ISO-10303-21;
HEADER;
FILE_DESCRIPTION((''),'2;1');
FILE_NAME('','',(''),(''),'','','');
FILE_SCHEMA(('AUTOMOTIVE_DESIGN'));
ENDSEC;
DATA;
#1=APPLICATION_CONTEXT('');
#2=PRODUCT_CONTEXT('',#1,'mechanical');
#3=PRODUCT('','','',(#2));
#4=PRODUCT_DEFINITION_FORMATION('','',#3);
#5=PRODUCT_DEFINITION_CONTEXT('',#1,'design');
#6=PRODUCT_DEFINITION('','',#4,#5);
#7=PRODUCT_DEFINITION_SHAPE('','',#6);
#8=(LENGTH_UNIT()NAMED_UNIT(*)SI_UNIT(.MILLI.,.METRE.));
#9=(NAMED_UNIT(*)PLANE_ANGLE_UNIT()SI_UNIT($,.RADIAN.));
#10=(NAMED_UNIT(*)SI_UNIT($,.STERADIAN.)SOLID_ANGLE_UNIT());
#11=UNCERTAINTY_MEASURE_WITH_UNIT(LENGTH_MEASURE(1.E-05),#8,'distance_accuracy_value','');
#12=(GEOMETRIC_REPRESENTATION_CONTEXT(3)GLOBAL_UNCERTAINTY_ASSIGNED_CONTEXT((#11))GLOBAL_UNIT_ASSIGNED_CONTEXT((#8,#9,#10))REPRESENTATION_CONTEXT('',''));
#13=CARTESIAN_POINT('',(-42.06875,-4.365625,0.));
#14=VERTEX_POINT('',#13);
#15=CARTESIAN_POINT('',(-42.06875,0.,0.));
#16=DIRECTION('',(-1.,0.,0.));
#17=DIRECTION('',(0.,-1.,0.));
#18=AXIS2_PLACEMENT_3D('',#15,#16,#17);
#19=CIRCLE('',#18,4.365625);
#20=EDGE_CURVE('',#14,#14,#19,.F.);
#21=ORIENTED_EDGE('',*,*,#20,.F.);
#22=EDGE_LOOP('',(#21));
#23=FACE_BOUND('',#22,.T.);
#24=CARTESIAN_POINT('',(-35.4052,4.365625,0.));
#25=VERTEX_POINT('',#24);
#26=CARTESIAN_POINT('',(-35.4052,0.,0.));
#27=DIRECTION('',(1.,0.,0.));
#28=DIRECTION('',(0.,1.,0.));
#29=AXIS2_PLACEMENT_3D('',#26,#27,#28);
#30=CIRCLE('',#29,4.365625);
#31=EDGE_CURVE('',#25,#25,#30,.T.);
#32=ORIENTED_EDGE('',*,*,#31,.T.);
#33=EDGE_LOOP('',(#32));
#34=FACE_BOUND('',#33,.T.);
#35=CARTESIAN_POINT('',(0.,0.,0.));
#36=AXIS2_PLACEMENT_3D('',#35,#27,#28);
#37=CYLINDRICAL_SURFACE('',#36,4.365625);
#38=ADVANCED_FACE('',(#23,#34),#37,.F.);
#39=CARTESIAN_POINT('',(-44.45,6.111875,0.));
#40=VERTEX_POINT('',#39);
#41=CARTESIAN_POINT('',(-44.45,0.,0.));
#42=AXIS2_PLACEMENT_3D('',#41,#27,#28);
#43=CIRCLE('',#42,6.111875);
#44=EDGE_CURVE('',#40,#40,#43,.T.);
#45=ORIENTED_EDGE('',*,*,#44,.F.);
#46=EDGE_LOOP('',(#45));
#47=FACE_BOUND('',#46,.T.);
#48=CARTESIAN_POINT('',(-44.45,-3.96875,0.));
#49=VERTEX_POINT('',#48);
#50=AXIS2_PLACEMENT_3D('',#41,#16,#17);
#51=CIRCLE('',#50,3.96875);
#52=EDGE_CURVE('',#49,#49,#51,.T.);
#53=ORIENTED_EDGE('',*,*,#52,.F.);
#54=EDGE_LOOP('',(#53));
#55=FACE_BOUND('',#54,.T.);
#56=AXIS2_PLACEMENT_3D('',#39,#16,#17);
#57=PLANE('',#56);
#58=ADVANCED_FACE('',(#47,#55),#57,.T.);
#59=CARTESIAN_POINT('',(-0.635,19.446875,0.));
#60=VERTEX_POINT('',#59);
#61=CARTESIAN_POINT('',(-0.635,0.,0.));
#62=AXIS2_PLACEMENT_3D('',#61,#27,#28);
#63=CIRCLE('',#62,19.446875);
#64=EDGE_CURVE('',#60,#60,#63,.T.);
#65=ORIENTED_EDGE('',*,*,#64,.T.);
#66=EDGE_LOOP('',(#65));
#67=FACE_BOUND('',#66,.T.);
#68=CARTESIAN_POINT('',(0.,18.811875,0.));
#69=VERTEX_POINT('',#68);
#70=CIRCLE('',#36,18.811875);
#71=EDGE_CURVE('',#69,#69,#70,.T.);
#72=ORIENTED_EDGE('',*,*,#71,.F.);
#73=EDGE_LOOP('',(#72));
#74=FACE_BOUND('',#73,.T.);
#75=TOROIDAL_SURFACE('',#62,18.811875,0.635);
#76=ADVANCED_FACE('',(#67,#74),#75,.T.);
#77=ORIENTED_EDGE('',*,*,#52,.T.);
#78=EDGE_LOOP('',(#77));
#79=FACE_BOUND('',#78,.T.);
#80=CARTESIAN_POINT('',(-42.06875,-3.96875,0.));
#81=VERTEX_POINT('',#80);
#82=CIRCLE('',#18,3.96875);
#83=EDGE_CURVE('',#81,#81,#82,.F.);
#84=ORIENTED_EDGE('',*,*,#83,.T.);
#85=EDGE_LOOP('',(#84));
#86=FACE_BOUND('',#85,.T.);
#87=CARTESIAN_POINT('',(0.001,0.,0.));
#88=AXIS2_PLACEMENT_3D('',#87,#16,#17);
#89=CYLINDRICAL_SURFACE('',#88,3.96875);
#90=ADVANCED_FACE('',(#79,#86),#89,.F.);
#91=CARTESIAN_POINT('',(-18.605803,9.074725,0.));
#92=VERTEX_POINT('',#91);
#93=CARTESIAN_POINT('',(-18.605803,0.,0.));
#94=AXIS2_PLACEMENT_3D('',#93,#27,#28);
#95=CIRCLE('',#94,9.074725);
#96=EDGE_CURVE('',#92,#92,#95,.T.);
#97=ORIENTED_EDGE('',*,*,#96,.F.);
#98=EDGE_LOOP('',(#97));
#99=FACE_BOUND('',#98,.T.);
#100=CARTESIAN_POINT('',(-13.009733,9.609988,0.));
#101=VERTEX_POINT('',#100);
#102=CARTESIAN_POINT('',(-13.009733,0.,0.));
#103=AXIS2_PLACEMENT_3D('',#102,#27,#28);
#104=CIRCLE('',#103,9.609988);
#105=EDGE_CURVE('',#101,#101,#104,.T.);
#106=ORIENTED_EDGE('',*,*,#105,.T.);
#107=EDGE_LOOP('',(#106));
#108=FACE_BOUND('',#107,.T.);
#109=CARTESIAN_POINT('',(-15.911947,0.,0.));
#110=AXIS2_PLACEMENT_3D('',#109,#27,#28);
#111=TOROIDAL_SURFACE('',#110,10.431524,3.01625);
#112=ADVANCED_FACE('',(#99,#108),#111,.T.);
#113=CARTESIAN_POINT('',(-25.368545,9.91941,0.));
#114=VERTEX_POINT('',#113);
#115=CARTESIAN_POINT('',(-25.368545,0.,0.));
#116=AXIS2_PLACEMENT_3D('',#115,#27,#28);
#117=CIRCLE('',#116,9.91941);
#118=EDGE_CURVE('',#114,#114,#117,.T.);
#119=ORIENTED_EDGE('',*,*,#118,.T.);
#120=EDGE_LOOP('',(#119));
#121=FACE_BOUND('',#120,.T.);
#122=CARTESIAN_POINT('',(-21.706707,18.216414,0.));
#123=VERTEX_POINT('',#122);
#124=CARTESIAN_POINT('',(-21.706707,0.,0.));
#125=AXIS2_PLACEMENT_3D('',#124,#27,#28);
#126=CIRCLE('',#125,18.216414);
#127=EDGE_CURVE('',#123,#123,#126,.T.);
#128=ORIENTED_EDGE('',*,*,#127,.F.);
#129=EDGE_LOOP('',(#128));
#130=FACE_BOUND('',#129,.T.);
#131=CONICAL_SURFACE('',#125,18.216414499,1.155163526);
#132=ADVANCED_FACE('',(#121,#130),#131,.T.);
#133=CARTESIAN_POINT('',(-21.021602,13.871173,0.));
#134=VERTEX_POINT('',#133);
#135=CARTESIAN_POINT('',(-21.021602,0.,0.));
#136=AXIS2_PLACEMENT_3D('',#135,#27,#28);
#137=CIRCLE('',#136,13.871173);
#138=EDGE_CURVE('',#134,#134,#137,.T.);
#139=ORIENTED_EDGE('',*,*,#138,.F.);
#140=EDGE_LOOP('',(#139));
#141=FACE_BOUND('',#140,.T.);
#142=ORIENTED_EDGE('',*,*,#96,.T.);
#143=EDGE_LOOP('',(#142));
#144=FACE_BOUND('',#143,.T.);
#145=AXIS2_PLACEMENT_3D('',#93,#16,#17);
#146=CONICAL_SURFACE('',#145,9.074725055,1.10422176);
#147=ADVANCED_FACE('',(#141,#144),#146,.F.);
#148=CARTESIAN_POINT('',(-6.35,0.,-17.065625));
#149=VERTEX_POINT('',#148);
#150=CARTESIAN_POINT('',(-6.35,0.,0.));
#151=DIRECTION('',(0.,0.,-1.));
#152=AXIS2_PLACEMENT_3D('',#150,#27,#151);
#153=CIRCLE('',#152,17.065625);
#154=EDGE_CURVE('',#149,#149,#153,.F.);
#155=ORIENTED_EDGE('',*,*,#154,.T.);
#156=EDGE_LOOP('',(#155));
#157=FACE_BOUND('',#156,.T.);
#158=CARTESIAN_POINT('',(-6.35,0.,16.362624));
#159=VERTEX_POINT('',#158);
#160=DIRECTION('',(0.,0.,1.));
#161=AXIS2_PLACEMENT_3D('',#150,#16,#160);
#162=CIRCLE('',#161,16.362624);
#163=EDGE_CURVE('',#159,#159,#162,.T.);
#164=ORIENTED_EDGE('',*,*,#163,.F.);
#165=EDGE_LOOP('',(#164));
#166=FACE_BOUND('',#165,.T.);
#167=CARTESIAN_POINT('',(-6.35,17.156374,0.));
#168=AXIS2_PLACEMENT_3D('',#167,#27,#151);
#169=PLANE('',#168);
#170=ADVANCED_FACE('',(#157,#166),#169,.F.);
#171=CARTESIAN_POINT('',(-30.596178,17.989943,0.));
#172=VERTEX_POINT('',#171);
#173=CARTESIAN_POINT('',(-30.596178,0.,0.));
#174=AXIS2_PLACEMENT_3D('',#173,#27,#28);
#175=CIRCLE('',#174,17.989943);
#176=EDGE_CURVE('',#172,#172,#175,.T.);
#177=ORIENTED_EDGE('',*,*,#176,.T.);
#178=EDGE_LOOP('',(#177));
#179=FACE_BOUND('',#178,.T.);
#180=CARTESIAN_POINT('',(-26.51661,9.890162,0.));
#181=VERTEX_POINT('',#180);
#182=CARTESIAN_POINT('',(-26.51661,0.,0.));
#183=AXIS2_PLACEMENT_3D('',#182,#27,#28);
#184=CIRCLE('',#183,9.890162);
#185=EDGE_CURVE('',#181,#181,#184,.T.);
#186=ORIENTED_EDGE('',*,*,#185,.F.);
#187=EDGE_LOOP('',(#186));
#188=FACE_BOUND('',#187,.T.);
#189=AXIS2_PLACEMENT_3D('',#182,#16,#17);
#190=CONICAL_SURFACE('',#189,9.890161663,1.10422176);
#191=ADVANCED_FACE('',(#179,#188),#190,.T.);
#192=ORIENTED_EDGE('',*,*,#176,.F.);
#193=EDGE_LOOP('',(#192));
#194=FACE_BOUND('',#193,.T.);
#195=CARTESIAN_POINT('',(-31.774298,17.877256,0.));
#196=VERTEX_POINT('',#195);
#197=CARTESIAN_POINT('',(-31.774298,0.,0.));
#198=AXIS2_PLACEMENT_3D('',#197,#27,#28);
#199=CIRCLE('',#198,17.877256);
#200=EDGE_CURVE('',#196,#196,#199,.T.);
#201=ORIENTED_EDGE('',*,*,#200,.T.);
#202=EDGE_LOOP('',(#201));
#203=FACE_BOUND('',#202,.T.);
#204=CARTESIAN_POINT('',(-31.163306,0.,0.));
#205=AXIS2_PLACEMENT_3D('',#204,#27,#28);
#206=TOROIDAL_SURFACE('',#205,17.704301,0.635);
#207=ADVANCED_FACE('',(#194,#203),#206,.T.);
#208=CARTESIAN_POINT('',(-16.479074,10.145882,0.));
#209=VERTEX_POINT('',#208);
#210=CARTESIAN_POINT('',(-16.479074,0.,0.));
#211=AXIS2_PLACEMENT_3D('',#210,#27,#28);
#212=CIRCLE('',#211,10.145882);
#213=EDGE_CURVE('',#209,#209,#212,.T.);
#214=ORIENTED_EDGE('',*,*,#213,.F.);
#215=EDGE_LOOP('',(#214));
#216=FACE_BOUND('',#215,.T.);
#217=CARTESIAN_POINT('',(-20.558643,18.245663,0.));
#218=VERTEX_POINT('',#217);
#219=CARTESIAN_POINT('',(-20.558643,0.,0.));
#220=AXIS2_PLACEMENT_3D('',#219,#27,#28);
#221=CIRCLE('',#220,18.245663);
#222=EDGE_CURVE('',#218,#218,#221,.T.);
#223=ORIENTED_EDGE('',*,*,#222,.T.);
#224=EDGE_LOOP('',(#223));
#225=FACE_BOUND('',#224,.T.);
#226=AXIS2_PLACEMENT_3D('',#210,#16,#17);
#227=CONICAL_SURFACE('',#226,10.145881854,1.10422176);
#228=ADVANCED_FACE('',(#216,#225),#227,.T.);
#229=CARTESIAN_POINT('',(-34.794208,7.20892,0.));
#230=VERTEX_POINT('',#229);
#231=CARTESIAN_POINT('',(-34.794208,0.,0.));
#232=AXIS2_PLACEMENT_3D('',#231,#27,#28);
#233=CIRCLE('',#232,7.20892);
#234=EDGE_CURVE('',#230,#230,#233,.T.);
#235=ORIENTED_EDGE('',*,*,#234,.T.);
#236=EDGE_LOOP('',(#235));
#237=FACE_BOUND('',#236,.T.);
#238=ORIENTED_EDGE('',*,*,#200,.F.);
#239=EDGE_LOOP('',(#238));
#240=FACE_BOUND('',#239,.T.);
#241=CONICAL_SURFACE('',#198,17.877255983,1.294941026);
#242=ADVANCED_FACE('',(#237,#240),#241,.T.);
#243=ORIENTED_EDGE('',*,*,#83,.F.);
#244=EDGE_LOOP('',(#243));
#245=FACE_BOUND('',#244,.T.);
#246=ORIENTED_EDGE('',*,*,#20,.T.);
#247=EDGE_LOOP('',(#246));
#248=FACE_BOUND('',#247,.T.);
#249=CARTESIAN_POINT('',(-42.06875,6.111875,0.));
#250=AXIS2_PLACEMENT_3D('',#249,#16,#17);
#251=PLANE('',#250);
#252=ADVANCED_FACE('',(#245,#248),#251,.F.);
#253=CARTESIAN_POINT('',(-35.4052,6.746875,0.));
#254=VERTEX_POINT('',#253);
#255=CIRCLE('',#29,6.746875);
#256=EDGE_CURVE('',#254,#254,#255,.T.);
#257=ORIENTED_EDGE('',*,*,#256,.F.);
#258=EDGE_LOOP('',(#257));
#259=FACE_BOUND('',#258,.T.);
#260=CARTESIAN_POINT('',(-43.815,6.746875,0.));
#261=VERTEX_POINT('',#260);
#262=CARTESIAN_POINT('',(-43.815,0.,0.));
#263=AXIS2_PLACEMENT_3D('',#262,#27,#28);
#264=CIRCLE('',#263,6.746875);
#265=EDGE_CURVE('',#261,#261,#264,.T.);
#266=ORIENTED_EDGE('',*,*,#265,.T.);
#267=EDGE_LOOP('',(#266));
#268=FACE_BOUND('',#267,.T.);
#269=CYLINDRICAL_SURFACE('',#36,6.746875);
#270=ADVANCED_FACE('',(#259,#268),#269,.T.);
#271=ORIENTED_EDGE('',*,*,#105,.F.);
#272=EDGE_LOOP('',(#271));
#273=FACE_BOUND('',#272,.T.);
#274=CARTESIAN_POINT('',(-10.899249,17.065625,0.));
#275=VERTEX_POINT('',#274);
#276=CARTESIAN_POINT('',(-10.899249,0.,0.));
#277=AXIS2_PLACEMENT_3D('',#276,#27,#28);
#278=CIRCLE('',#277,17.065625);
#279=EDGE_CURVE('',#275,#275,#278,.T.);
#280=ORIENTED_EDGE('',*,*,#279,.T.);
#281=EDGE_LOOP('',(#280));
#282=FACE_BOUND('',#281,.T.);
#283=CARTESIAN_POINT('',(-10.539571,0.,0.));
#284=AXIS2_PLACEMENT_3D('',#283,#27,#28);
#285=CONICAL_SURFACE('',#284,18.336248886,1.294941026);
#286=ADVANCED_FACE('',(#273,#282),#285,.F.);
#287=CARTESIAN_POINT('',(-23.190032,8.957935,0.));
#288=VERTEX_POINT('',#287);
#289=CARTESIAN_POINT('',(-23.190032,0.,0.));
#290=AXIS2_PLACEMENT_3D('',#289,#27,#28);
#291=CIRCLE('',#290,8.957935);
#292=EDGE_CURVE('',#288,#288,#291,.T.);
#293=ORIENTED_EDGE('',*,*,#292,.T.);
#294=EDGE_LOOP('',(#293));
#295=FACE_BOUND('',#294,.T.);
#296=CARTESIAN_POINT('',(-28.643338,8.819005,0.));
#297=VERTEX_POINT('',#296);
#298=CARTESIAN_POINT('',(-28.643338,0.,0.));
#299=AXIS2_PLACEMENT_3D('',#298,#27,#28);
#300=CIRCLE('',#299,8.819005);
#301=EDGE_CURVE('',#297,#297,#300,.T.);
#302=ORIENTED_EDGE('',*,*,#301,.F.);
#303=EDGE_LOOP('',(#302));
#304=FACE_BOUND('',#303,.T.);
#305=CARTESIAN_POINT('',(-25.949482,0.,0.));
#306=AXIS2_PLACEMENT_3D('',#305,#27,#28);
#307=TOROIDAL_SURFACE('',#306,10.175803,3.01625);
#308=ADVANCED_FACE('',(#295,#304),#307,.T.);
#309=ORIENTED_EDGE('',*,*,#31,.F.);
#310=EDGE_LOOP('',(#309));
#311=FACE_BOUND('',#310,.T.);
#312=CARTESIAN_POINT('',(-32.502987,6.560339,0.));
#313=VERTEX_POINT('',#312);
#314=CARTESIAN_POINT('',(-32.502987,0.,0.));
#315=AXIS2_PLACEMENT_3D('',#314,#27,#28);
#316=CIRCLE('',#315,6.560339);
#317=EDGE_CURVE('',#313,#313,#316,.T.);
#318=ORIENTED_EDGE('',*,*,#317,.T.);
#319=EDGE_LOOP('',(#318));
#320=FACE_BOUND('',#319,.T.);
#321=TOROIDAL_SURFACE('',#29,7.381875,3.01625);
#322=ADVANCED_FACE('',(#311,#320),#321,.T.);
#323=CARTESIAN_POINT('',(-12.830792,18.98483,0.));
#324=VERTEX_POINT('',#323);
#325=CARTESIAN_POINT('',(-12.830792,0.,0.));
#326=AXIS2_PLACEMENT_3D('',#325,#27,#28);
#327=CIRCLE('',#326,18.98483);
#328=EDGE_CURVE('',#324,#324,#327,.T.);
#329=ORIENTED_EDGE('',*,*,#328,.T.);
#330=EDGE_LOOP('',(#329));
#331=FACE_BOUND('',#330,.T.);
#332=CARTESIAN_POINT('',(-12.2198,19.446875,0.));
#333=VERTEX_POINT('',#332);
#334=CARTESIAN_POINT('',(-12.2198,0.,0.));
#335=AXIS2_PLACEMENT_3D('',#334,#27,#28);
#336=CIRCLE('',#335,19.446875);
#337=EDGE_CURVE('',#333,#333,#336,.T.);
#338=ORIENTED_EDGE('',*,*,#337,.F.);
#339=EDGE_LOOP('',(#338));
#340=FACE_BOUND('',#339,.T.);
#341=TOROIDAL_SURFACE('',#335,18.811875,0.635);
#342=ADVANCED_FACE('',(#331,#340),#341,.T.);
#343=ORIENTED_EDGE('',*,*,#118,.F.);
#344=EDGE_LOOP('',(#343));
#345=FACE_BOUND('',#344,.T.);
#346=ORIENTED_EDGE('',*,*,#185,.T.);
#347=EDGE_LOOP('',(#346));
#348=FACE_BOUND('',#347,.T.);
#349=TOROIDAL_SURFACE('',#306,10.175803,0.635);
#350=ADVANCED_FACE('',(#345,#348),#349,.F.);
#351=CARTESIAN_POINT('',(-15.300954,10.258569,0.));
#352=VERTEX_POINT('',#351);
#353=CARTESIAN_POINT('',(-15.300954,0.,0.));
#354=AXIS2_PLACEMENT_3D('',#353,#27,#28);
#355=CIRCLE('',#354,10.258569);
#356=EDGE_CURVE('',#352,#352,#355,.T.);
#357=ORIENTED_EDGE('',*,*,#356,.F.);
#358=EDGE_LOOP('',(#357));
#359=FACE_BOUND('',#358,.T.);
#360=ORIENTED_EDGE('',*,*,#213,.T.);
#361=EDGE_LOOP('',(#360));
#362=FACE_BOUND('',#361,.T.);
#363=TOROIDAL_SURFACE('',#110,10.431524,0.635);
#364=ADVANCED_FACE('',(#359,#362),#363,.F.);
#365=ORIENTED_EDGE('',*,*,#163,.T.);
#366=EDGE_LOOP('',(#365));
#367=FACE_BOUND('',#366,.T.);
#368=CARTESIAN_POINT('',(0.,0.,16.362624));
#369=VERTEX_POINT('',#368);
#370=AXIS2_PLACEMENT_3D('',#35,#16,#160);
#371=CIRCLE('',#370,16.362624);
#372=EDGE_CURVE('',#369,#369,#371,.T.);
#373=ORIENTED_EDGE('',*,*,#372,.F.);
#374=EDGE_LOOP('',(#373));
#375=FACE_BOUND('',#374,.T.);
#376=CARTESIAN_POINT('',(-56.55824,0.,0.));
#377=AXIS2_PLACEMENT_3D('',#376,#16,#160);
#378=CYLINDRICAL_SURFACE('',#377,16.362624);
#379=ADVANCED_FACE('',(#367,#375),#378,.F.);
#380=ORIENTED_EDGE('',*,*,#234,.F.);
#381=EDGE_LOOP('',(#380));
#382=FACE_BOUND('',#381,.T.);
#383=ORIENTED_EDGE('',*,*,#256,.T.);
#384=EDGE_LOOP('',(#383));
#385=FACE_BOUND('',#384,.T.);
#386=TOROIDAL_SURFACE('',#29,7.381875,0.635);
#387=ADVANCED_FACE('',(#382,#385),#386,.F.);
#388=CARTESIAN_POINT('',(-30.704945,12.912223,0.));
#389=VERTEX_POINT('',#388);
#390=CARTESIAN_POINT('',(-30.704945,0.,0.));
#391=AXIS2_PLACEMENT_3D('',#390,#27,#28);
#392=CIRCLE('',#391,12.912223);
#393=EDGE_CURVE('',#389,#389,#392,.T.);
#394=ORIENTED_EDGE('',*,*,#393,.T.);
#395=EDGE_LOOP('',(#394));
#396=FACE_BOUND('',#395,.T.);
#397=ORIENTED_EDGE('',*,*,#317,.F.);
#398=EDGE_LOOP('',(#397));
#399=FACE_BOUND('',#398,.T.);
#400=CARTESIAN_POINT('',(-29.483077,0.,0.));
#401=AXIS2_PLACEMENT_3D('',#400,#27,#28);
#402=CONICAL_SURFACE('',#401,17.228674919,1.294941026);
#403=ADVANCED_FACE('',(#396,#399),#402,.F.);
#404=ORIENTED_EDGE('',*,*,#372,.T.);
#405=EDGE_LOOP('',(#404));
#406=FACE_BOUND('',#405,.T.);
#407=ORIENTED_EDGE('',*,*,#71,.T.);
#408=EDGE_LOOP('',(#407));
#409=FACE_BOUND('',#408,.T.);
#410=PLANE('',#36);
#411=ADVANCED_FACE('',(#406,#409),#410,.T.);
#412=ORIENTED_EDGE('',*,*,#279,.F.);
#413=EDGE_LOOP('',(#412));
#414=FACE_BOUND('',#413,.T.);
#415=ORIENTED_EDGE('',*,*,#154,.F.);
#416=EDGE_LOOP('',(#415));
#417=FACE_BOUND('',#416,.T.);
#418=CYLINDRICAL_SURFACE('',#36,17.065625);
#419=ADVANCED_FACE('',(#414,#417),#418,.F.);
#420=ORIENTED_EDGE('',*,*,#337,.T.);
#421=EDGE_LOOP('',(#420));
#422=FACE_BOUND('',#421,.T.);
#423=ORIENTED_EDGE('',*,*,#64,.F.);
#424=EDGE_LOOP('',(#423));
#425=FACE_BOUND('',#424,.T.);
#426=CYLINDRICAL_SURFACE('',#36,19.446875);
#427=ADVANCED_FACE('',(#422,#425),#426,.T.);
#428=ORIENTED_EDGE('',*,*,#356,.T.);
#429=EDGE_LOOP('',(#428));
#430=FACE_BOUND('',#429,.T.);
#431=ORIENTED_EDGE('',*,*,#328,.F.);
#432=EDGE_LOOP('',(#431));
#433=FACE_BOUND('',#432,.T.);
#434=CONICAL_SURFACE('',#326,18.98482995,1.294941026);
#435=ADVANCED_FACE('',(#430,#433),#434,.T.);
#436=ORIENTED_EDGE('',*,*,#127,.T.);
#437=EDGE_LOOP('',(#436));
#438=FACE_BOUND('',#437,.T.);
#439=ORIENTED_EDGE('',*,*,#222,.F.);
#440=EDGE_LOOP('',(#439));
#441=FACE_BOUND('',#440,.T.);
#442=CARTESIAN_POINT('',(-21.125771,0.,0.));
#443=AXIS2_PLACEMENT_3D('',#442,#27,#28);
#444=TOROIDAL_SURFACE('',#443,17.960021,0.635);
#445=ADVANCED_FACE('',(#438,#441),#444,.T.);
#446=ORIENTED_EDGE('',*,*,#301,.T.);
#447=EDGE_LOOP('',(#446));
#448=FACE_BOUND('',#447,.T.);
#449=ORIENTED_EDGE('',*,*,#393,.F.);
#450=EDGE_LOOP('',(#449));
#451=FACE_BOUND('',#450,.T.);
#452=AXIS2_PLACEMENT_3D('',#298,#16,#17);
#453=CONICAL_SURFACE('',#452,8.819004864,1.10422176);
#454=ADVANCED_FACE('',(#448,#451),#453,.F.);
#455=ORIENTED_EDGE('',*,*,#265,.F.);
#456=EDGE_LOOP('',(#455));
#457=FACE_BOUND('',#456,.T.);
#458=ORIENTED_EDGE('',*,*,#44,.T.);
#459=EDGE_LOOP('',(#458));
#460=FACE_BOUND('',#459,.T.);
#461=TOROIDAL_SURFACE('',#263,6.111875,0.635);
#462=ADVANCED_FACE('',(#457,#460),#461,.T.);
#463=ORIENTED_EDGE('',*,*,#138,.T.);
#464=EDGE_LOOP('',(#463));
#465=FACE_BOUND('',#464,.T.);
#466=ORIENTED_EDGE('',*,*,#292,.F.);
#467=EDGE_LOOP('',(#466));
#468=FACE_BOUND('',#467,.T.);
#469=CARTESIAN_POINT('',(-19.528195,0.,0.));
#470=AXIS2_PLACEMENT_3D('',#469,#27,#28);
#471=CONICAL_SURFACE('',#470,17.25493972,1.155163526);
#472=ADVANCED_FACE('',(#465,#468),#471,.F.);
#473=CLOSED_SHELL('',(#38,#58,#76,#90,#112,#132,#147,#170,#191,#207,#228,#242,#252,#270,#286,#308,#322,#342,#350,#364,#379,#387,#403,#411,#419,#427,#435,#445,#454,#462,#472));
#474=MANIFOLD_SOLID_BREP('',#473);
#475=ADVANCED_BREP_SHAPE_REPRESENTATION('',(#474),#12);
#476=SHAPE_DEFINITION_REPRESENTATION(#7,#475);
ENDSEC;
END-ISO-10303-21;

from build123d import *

# Parameters (mm, degrees)
SKETCH2_W          = 6.35
SKETCH2_H          = 0.79375
CUT_EXTRUDE1_REACH = 54.27
SKETCH3_R          = 3.96875


# Read off the part's stored shape, not the designer's step: Shell1
with BuildPart() as part:
    # Sketch1 → Revolve1 (revolve)
    with BuildSketch(Plane.XY):
        with BuildLine():
            Line((0, 0), (0, 18.811875))
            ThreePointArc((0, 18.811875), (-0.185987194, 19.260887806), (-0.635, 19.446875))
            Line((-0.635, 19.446875), (-12.219799826, 19.446875))
            ThreePointArc((-12.219799826, 19.446875), (-12.602813277, 19.318358659), (-12.830792122, 18.98482995))
            Line((-12.830792122, 18.98482995), (-15.300954332, 10.258568717))
            ThreePointArc((-15.300954332, 10.258568717), (-15.851484992, 9.799408653), (-16.479074262, 10.145881854))
            Line((-16.479074262, 10.145881854), (-20.558643019, 18.245663037))
            ThreePointArc((-20.558643019, 18.245663037), (-21.141942917, 18.594815252), (-21.706707389, 18.216414499))
            Line((-21.706707389, 18.216414499), (-25.368545199, 9.919410201))
            ThreePointArc((-25.368545199, 9.919410201), (-25.933309671, 9.541009448), (-26.516609568, 9.890161663))
            Line((-26.516609568, 9.890161663), (-30.596178325, 17.989942846))
            ThreePointArc((-30.596178325, 17.989942846), (-31.223767596, 18.336416047), (-31.774298256, 17.877255983))
            Line((-31.774298256, 17.877255983), (-34.794207878, 7.20892005))
            ThreePointArc((-34.794207878, 7.20892005), (-35.022186723, 6.875391341), (-35.405200174, 6.746875))
            Line((-35.405200174, 6.746875), (-43.815, 6.746875))
            ThreePointArc((-43.815, 6.746875), (-44.264012806, 6.560887806), (-44.45, 6.111875))
            Line((-44.45, 6.111875), (-44.45, 0))
            Line((-44.45, 0), (0, 0))
        make_face()
    revolve(axis=Axis((0, 0, 0), (-1, 0, 0)))

    # Shell1 outline → Shell1 (revolve, cut)
    with BuildSketch(Plane.YX):
        with BuildLine():
            Line((0, 0), (0, -42.06875))
            Line((0, -42.06875), (4.365625, -42.06875))
            Line((4.365625, -42.06875), (4.365625, -35.405200174))
            ThreePointArc((4.365625, -35.405200174), (4.97607762, -33.585886284), (6.560338986, -32.50298677))
            Line((6.560338986, -32.50298677), (12.912222623, -30.704944917))
            Line((12.912222623, -30.704944917), (8.819004864, -28.643338201))
            ThreePointArc((8.819004864, -28.643338201), (7.160531843, -25.872663689), (8.957935423, -23.190032446))
            Line((8.957935423, -23.190032446), (13.871173342, -21.02160156))
            Line((13.871173342, -21.02160156), (9.074725055, -18.605802895))
            ThreePointArc((9.074725055, -18.605802895), (7.428977352, -15.624753859), (9.609987653, -13.009733224))
            Line((9.609987653, -13.009733224), (17.065625, -10.899249348))
            Line((17.065625, -10.899249348), (17.065625, 0))
            Line((17.065625, 0), (0, 0))
        make_face()
    revolve(axis=Axis((0, 0, 0), (1, 0, 0)), mode=Mode.SUBTRACT)

    # Sketch2 → Revolve2 (revolve)
    with BuildSketch(Plane.XY):
        with Locations((-3.175, 16.75949892)):
            Rectangle(SKETCH2_W, SKETCH2_H)
    revolve(axis=Axis((-56.558240413, 0, 0), (1, 0, 0)))

    # Sketch3 → Cut-Extrude1 (cut, up to next)
    with BuildSketch(Plane.ZY.offset(44.45), mode=Mode.PRIVATE) as cut_extrude1_sk1:
        with Locations(Location((0, 0, 0), (0, 0, 270))):
            Circle(SKETCH3_R)
    cut_extrude1_tool1 = extrude(cut_extrude1_sk1.sketch, amount=-CUT_EXTRUDE1_REACH, mode=Mode.PRIVATE) & part.part
    add(cut_extrude1_tool1.solids().sort_by_distance((-44.45, 0, 0))[0], mode=Mode.SUBTRACT)


solid = part.part
